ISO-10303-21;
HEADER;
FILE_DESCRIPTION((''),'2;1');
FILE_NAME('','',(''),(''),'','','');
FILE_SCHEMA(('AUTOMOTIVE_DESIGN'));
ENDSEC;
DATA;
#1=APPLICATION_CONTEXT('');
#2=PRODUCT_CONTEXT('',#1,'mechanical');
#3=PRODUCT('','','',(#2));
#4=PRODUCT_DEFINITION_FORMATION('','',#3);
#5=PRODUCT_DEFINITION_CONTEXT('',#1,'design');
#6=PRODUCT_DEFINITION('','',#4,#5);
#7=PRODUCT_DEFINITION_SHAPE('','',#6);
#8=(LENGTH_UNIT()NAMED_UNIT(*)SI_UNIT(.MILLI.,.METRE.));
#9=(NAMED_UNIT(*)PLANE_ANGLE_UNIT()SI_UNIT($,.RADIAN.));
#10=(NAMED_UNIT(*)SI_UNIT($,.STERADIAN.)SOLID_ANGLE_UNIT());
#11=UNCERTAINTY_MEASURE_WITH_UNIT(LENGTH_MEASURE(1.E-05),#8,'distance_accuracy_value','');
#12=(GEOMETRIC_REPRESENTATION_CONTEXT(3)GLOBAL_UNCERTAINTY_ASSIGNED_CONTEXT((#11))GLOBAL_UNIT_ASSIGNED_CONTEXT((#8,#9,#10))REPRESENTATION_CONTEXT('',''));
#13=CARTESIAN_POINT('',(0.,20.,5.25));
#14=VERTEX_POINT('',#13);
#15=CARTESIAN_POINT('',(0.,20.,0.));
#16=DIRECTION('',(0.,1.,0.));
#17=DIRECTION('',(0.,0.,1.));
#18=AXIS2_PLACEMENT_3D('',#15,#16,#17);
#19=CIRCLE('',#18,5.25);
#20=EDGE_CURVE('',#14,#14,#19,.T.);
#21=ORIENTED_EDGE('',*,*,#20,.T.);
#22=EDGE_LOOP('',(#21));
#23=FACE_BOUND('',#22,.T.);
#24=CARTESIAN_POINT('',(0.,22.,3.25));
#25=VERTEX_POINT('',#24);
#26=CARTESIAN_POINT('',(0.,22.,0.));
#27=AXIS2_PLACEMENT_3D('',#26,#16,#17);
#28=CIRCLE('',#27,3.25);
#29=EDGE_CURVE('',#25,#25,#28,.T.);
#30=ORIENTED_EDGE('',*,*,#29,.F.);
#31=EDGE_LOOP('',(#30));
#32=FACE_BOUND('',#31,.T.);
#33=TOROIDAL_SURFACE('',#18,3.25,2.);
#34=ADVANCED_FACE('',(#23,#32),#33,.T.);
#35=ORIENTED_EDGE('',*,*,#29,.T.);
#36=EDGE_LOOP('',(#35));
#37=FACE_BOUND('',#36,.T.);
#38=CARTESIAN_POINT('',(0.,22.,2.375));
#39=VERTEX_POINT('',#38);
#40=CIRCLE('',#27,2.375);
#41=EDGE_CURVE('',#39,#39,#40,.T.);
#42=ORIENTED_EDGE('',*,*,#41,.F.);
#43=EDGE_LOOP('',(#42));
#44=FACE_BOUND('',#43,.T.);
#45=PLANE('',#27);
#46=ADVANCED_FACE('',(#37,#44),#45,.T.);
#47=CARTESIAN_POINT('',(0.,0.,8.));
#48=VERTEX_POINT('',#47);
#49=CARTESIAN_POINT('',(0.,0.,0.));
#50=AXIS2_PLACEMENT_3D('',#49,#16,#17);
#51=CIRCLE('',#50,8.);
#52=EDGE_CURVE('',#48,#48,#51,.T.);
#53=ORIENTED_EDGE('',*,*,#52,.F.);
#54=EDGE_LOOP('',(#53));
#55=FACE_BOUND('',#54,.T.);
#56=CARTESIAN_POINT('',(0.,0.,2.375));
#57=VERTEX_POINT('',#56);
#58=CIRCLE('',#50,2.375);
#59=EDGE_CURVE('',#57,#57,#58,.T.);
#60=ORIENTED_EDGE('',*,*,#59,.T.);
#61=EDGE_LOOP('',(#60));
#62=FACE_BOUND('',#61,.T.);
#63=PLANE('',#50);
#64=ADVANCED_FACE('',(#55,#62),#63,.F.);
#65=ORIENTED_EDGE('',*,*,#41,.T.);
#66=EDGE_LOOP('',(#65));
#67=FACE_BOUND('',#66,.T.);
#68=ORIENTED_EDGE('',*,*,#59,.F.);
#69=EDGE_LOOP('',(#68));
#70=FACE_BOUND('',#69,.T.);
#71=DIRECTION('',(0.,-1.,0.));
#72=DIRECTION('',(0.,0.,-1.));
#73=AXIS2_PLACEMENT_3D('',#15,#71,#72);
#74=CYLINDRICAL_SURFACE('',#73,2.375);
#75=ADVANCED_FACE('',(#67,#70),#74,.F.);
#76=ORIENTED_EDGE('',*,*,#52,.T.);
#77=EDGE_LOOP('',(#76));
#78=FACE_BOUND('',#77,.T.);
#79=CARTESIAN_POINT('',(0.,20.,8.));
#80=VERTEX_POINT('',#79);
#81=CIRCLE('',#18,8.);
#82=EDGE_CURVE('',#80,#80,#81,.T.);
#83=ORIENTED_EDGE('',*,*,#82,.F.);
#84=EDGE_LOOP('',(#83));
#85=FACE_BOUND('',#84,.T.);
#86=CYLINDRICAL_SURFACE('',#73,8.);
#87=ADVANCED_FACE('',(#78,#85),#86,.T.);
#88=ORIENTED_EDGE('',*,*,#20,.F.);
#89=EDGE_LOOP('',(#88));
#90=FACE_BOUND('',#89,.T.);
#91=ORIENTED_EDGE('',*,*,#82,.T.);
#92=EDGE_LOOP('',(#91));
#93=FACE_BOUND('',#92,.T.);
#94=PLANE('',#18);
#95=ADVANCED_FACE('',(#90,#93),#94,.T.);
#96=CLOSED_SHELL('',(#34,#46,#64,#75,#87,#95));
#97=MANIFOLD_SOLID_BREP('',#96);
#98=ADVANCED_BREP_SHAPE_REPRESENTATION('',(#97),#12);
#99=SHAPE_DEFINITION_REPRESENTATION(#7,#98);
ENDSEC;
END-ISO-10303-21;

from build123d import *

# Parameters (mm, degrees)
SKETCH1_R           = 8
SKETCH1_R_2         = 2.375
BOSS_EXTRUDE1_DEPTH = 20
SKETCH2_R           = 5.25
SKETCH2_R_2         = 2.375
BOSS_EXTRUDE2_DEPTH = 2
FILLET1_R           = 2


with BuildPart() as part:
    # Sketch1 → Boss-Extrude1 (new body)
    with BuildSketch(Plane(origin=(0, 0, 0), x_dir=(1, 0, 0), z_dir=(0, 1, 0))):
        with Locations(Location((0, 0, 0), (0, 0, 270))):
            Circle(SKETCH1_R)
        with Locations(Location((0, 0, 0), (0, 0, 270))):
            Circle(SKETCH1_R_2, mode=Mode.SUBTRACT)
    extrude(amount=BOSS_EXTRUDE1_DEPTH)

    # Sketch2 → Boss-Extrude2 (add)
    with BuildSketch(Plane(origin=(0, 20, 0), x_dir=(1, 0, 0), z_dir=(0, 1, 0))):
        with Locations(Location((0, 0, 0), (0, 0, 270))):
            Circle(SKETCH2_R)
        with Locations(Location((0, 0, 0), (0, 0, 270))):
            Circle(SKETCH2_R_2, mode=Mode.SUBTRACT)
    extrude(amount=BOSS_EXTRUDE2_DEPTH)

    # Fillet1
    fillet1_edges = [part.edges().sort_by_distance(p)[0] for p in [
        (0, 22, -5.25),
    ]]
    fillet(fillet1_edges, radius=FILLET1_R - 0.0001)  # a hair under: the kernel refuses the full size


solid = part.part
